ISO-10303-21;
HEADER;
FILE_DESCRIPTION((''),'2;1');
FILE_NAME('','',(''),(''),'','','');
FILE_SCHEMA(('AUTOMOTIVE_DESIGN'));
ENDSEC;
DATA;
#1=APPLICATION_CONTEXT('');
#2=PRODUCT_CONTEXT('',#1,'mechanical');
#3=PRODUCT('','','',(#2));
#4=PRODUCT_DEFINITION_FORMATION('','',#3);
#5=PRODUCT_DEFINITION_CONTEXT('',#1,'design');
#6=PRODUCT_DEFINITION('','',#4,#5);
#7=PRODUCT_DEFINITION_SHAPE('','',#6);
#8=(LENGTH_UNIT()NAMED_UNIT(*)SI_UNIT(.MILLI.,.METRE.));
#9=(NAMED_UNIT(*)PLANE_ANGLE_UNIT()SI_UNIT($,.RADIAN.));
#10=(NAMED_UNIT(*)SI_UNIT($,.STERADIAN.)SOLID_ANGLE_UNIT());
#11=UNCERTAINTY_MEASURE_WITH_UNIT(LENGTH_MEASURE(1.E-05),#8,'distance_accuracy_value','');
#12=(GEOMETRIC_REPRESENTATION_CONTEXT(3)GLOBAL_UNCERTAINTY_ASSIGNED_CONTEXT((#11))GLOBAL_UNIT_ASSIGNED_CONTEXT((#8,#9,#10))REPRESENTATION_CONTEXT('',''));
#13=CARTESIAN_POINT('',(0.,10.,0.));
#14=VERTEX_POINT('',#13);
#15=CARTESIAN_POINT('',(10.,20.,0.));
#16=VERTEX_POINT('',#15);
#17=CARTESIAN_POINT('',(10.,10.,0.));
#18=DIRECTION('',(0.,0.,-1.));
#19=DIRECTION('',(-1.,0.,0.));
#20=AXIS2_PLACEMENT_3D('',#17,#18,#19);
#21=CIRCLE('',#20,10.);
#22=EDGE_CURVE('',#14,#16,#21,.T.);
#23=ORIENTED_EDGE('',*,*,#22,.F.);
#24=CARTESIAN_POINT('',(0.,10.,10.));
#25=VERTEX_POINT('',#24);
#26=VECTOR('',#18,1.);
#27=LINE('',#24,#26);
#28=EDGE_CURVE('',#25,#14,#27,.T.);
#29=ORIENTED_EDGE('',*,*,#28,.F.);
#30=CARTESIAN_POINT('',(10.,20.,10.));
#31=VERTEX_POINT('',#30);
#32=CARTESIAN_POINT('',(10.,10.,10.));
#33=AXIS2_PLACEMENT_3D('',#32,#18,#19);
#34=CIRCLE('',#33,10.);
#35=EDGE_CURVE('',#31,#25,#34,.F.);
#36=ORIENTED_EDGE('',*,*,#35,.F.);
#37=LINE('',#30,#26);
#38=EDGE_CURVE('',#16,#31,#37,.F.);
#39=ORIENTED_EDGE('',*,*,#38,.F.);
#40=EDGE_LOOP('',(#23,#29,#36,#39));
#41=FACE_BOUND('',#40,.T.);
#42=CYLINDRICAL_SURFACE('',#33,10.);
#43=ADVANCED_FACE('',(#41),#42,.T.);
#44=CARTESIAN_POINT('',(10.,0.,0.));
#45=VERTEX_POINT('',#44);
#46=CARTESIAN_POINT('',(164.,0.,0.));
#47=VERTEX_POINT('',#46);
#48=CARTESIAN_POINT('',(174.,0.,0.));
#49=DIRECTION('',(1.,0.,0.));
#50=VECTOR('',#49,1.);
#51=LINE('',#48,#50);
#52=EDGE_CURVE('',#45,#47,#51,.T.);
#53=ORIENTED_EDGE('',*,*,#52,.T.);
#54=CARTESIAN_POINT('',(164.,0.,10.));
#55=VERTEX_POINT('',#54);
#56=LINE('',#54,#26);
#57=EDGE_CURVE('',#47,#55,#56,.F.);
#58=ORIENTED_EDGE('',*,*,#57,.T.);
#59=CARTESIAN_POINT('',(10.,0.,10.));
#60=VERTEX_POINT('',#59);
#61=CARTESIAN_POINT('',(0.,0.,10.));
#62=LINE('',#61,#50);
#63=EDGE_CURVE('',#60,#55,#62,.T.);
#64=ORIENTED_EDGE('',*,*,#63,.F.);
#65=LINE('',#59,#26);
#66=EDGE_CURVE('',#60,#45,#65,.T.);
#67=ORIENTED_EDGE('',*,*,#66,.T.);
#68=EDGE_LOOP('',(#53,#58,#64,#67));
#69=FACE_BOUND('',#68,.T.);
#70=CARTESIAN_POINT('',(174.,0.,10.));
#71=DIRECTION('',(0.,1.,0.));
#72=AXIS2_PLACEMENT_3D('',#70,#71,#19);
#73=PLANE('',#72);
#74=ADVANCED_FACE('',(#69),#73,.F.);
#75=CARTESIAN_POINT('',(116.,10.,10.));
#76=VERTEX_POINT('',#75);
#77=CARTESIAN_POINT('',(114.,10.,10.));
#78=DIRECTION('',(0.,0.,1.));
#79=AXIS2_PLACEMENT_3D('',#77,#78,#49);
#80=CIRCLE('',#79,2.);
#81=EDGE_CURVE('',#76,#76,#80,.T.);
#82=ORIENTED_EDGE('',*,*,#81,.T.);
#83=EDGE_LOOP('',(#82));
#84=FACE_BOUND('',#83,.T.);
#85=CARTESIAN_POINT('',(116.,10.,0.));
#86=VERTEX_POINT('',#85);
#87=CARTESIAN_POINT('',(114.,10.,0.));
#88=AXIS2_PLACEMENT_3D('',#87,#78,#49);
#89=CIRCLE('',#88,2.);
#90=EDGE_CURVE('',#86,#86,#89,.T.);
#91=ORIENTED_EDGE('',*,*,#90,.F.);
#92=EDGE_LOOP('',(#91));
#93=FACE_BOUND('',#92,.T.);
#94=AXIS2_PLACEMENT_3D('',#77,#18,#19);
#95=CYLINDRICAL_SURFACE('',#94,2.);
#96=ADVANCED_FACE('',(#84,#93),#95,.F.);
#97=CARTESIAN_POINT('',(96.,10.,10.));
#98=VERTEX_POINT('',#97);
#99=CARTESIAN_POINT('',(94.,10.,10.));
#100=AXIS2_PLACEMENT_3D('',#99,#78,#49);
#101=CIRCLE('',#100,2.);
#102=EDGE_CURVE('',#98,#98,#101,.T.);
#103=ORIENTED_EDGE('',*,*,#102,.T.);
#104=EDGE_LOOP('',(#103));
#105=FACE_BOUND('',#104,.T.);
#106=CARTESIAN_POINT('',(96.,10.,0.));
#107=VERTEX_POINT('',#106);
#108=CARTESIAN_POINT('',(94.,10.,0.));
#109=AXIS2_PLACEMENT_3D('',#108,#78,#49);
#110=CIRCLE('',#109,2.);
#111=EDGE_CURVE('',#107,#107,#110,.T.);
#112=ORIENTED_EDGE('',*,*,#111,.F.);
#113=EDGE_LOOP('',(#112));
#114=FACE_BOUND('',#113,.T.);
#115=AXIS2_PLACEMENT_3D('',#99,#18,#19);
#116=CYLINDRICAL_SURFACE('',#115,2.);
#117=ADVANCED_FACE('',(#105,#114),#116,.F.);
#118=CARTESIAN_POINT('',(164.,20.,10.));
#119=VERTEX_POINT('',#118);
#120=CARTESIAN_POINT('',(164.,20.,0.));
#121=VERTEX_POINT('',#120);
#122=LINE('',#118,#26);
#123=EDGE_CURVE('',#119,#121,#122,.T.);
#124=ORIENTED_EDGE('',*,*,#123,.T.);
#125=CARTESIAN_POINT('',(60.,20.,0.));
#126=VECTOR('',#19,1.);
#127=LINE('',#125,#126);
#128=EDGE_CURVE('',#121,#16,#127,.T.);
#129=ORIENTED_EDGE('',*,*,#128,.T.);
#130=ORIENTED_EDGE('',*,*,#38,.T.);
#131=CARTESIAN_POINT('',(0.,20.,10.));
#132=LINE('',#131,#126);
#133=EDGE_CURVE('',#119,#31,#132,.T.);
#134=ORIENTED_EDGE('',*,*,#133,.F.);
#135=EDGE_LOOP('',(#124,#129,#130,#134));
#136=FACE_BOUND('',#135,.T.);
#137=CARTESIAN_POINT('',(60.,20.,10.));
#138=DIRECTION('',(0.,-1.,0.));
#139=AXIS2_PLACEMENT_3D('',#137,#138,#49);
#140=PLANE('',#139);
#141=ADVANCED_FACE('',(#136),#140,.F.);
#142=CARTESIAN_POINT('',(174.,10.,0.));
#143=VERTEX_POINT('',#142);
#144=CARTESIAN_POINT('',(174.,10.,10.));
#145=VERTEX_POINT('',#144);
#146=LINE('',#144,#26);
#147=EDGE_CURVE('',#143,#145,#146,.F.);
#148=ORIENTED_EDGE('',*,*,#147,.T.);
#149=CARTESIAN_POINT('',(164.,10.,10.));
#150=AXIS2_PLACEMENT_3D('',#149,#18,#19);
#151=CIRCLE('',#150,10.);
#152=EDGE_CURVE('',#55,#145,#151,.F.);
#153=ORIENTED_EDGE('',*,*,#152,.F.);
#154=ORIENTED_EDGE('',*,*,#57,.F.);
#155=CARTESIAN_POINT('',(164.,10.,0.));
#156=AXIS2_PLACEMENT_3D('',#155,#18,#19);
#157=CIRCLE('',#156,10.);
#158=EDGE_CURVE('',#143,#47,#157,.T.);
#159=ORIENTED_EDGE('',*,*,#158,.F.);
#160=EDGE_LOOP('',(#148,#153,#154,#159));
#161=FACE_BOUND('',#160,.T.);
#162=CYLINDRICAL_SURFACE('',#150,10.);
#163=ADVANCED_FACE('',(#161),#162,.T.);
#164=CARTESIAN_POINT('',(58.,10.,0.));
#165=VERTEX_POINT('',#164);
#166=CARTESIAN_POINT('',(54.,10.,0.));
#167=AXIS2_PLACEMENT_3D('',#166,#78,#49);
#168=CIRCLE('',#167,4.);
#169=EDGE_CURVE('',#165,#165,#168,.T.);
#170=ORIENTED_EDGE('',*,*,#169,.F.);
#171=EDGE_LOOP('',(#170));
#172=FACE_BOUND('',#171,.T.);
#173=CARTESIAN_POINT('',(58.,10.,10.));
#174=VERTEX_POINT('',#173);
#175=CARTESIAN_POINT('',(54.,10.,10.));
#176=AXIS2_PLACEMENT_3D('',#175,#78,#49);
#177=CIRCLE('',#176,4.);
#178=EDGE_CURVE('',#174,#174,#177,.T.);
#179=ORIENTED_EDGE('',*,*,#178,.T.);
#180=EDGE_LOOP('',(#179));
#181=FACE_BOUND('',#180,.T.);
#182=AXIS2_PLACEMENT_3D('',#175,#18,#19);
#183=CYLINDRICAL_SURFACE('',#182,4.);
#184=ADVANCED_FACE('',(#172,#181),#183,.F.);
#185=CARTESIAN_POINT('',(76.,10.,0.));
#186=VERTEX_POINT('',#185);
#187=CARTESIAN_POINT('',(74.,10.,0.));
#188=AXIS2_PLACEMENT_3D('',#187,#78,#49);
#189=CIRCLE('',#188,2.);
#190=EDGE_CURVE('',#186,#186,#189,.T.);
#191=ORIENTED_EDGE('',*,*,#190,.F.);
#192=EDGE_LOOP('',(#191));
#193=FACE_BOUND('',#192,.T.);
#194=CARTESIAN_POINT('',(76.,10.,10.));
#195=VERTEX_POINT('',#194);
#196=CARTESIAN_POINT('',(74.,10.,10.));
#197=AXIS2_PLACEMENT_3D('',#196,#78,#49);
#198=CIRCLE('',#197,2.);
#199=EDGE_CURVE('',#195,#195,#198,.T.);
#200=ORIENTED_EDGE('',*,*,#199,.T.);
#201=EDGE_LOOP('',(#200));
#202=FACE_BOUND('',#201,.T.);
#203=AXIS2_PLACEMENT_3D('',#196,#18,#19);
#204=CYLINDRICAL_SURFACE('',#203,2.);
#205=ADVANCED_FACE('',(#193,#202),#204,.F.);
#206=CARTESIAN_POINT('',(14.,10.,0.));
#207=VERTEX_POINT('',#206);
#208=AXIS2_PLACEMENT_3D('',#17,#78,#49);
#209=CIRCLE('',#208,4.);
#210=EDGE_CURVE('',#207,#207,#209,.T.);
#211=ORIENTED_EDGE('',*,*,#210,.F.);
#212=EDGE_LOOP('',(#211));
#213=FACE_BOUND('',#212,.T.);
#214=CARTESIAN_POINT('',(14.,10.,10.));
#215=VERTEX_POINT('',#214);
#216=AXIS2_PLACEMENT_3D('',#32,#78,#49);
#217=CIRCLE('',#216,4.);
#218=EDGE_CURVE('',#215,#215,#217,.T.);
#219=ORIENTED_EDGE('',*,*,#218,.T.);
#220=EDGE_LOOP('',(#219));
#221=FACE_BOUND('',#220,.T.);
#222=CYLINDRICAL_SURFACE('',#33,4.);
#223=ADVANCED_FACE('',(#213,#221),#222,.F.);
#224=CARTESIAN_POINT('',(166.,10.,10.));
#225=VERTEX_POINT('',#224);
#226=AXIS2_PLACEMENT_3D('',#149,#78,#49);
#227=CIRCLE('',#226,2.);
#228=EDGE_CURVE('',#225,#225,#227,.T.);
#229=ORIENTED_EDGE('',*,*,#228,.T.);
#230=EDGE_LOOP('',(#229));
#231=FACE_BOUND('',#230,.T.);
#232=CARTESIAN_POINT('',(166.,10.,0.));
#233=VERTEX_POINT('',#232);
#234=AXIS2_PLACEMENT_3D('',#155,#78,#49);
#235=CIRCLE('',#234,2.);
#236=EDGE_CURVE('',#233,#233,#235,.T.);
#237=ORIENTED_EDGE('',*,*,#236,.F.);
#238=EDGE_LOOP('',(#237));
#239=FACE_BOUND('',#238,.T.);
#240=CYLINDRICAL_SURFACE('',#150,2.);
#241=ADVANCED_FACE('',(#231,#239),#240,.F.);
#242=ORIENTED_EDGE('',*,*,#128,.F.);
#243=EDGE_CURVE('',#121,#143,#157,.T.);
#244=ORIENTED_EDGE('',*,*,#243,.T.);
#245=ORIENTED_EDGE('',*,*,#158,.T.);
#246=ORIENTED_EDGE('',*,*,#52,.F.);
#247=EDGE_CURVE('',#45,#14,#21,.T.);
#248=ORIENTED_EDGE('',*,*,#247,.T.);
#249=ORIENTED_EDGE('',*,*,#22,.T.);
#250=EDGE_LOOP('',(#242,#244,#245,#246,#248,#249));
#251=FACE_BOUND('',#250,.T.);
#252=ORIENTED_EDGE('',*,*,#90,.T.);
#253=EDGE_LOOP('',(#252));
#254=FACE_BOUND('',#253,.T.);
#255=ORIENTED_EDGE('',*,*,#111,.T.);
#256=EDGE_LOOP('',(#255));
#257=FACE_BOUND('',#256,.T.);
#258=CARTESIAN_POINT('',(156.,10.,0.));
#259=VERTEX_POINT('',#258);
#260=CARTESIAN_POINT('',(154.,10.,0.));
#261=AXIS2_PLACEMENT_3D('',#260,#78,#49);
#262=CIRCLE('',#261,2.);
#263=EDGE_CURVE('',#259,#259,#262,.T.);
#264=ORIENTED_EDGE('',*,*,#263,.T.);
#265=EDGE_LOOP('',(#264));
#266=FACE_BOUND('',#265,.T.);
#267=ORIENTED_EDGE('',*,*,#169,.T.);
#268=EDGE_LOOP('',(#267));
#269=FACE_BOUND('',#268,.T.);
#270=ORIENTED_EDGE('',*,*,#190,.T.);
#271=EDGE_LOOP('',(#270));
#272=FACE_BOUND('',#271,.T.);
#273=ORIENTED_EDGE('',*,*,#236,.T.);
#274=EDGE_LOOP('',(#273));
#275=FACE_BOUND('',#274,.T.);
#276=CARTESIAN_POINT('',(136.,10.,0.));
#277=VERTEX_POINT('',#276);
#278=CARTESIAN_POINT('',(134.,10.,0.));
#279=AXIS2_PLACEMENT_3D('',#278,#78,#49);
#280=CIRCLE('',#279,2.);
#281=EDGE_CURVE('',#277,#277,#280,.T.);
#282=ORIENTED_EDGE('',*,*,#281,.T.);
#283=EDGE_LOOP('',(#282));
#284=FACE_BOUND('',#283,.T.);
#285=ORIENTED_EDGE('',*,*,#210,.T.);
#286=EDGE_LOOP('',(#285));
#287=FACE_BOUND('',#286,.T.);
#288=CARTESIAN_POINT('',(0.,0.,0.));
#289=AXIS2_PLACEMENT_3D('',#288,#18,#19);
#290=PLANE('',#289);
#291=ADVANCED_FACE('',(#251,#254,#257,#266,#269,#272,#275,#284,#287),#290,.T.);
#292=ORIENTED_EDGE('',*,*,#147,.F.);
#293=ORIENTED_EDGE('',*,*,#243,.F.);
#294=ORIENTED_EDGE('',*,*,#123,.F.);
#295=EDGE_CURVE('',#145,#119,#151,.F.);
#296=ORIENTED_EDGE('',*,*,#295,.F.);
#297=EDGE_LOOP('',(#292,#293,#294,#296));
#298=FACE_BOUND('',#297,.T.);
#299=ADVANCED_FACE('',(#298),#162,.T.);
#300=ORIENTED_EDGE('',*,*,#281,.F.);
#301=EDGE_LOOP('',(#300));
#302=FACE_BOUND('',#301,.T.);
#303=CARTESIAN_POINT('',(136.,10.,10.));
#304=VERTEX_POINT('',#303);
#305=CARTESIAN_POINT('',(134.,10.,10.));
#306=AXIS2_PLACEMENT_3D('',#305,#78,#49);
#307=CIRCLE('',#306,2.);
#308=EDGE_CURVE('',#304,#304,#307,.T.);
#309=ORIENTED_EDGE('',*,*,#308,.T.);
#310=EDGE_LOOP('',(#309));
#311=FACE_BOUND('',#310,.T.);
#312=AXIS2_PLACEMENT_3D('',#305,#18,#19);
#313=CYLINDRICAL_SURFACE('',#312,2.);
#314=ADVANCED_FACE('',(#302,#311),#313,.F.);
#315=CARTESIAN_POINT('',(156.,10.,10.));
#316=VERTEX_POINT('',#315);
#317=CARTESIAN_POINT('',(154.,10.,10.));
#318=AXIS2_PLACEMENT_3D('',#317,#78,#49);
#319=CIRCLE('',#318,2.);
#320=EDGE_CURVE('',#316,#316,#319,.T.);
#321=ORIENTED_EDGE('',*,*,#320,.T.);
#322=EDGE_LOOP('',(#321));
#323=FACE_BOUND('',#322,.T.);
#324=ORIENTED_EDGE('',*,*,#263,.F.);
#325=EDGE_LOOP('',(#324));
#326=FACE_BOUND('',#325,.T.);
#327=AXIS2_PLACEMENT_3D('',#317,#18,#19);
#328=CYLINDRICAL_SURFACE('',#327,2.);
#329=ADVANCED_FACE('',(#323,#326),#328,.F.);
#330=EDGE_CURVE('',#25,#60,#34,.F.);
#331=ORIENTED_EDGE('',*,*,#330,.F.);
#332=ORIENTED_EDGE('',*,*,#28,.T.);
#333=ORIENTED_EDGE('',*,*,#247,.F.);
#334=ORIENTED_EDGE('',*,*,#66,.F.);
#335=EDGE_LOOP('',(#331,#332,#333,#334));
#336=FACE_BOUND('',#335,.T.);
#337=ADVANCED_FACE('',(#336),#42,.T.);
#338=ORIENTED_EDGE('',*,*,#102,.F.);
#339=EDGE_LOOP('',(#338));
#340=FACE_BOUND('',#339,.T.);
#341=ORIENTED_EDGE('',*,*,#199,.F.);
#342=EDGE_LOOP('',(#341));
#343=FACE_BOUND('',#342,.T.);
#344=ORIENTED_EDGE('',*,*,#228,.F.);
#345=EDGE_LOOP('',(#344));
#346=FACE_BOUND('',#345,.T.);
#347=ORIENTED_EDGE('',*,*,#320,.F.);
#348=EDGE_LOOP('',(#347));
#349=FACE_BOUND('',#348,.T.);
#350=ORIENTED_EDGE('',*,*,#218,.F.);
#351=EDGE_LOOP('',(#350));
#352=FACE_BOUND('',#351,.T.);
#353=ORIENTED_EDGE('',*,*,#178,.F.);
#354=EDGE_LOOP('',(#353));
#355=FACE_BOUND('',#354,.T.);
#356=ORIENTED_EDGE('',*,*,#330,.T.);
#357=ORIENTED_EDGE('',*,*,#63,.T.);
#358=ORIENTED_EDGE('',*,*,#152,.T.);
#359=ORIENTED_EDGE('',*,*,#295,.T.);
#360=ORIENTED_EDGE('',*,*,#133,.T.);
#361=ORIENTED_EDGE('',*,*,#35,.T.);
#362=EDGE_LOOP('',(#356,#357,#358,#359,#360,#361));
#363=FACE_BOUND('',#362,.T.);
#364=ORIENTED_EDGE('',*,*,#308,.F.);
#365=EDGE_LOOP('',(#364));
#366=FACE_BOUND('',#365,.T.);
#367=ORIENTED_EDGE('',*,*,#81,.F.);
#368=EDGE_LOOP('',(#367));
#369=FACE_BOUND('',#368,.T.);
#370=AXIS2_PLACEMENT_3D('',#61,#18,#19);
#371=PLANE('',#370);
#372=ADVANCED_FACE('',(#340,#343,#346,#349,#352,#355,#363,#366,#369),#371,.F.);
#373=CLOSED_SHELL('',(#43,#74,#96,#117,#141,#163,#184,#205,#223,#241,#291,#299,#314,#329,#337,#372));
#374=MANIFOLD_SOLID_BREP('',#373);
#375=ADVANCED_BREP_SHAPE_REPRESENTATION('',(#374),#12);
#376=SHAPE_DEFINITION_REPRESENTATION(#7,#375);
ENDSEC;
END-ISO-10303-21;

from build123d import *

# Parameters (mm, degrees)
ESQUISSE1_R        = 4
ESQUISSE1_R_2      = 2
BOSS_EXTRU_1_DEPTH = 10
CONG_1_R           = 10


with BuildPart() as part:
    # Esquisse1 → Boss.-Extru.1 (new body)
    with BuildSketch(Plane.XY):
        Polygon((0, 20), (0, 0), (60, 0), (154, 0), (174, 0), (174, 20), (154, 20), (60, 20), align=None)
        with Locations((10, 10)):
            Circle(ESQUISSE1_R, mode=Mode.SUBTRACT)
        with Locations((54, 10)):
            Circle(ESQUISSE1_R, mode=Mode.SUBTRACT)
        with Locations((154, 10)):
            Circle(ESQUISSE1_R_2, mode=Mode.SUBTRACT)
        with Locations((164, 10)):
            Circle(ESQUISSE1_R_2, mode=Mode.SUBTRACT)
        with Locations((74, 10)):
            Circle(ESQUISSE1_R_2, mode=Mode.SUBTRACT)
        with Locations((94, 10)):
            Circle(ESQUISSE1_R_2, mode=Mode.SUBTRACT)
        with Locations((114, 10)):
            Circle(ESQUISSE1_R_2, mode=Mode.SUBTRACT)
        with Locations((134, 10)):
            Circle(ESQUISSE1_R_2, mode=Mode.SUBTRACT)
    extrude(amount=BOSS_EXTRU_1_DEPTH)

    # Congé1
    cong_1_edges = [part.edges().sort_by_distance(p)[0] for p in [
        (0, 0, 5),
        (0, 20, 5),
        (174, 0, 5),
        (174, 20, 5),
    ]]
    fillet(cong_1_edges, radius=CONG_1_R - 0.0001)  # a hair under: the kernel refuses the full size


solid = part.part
